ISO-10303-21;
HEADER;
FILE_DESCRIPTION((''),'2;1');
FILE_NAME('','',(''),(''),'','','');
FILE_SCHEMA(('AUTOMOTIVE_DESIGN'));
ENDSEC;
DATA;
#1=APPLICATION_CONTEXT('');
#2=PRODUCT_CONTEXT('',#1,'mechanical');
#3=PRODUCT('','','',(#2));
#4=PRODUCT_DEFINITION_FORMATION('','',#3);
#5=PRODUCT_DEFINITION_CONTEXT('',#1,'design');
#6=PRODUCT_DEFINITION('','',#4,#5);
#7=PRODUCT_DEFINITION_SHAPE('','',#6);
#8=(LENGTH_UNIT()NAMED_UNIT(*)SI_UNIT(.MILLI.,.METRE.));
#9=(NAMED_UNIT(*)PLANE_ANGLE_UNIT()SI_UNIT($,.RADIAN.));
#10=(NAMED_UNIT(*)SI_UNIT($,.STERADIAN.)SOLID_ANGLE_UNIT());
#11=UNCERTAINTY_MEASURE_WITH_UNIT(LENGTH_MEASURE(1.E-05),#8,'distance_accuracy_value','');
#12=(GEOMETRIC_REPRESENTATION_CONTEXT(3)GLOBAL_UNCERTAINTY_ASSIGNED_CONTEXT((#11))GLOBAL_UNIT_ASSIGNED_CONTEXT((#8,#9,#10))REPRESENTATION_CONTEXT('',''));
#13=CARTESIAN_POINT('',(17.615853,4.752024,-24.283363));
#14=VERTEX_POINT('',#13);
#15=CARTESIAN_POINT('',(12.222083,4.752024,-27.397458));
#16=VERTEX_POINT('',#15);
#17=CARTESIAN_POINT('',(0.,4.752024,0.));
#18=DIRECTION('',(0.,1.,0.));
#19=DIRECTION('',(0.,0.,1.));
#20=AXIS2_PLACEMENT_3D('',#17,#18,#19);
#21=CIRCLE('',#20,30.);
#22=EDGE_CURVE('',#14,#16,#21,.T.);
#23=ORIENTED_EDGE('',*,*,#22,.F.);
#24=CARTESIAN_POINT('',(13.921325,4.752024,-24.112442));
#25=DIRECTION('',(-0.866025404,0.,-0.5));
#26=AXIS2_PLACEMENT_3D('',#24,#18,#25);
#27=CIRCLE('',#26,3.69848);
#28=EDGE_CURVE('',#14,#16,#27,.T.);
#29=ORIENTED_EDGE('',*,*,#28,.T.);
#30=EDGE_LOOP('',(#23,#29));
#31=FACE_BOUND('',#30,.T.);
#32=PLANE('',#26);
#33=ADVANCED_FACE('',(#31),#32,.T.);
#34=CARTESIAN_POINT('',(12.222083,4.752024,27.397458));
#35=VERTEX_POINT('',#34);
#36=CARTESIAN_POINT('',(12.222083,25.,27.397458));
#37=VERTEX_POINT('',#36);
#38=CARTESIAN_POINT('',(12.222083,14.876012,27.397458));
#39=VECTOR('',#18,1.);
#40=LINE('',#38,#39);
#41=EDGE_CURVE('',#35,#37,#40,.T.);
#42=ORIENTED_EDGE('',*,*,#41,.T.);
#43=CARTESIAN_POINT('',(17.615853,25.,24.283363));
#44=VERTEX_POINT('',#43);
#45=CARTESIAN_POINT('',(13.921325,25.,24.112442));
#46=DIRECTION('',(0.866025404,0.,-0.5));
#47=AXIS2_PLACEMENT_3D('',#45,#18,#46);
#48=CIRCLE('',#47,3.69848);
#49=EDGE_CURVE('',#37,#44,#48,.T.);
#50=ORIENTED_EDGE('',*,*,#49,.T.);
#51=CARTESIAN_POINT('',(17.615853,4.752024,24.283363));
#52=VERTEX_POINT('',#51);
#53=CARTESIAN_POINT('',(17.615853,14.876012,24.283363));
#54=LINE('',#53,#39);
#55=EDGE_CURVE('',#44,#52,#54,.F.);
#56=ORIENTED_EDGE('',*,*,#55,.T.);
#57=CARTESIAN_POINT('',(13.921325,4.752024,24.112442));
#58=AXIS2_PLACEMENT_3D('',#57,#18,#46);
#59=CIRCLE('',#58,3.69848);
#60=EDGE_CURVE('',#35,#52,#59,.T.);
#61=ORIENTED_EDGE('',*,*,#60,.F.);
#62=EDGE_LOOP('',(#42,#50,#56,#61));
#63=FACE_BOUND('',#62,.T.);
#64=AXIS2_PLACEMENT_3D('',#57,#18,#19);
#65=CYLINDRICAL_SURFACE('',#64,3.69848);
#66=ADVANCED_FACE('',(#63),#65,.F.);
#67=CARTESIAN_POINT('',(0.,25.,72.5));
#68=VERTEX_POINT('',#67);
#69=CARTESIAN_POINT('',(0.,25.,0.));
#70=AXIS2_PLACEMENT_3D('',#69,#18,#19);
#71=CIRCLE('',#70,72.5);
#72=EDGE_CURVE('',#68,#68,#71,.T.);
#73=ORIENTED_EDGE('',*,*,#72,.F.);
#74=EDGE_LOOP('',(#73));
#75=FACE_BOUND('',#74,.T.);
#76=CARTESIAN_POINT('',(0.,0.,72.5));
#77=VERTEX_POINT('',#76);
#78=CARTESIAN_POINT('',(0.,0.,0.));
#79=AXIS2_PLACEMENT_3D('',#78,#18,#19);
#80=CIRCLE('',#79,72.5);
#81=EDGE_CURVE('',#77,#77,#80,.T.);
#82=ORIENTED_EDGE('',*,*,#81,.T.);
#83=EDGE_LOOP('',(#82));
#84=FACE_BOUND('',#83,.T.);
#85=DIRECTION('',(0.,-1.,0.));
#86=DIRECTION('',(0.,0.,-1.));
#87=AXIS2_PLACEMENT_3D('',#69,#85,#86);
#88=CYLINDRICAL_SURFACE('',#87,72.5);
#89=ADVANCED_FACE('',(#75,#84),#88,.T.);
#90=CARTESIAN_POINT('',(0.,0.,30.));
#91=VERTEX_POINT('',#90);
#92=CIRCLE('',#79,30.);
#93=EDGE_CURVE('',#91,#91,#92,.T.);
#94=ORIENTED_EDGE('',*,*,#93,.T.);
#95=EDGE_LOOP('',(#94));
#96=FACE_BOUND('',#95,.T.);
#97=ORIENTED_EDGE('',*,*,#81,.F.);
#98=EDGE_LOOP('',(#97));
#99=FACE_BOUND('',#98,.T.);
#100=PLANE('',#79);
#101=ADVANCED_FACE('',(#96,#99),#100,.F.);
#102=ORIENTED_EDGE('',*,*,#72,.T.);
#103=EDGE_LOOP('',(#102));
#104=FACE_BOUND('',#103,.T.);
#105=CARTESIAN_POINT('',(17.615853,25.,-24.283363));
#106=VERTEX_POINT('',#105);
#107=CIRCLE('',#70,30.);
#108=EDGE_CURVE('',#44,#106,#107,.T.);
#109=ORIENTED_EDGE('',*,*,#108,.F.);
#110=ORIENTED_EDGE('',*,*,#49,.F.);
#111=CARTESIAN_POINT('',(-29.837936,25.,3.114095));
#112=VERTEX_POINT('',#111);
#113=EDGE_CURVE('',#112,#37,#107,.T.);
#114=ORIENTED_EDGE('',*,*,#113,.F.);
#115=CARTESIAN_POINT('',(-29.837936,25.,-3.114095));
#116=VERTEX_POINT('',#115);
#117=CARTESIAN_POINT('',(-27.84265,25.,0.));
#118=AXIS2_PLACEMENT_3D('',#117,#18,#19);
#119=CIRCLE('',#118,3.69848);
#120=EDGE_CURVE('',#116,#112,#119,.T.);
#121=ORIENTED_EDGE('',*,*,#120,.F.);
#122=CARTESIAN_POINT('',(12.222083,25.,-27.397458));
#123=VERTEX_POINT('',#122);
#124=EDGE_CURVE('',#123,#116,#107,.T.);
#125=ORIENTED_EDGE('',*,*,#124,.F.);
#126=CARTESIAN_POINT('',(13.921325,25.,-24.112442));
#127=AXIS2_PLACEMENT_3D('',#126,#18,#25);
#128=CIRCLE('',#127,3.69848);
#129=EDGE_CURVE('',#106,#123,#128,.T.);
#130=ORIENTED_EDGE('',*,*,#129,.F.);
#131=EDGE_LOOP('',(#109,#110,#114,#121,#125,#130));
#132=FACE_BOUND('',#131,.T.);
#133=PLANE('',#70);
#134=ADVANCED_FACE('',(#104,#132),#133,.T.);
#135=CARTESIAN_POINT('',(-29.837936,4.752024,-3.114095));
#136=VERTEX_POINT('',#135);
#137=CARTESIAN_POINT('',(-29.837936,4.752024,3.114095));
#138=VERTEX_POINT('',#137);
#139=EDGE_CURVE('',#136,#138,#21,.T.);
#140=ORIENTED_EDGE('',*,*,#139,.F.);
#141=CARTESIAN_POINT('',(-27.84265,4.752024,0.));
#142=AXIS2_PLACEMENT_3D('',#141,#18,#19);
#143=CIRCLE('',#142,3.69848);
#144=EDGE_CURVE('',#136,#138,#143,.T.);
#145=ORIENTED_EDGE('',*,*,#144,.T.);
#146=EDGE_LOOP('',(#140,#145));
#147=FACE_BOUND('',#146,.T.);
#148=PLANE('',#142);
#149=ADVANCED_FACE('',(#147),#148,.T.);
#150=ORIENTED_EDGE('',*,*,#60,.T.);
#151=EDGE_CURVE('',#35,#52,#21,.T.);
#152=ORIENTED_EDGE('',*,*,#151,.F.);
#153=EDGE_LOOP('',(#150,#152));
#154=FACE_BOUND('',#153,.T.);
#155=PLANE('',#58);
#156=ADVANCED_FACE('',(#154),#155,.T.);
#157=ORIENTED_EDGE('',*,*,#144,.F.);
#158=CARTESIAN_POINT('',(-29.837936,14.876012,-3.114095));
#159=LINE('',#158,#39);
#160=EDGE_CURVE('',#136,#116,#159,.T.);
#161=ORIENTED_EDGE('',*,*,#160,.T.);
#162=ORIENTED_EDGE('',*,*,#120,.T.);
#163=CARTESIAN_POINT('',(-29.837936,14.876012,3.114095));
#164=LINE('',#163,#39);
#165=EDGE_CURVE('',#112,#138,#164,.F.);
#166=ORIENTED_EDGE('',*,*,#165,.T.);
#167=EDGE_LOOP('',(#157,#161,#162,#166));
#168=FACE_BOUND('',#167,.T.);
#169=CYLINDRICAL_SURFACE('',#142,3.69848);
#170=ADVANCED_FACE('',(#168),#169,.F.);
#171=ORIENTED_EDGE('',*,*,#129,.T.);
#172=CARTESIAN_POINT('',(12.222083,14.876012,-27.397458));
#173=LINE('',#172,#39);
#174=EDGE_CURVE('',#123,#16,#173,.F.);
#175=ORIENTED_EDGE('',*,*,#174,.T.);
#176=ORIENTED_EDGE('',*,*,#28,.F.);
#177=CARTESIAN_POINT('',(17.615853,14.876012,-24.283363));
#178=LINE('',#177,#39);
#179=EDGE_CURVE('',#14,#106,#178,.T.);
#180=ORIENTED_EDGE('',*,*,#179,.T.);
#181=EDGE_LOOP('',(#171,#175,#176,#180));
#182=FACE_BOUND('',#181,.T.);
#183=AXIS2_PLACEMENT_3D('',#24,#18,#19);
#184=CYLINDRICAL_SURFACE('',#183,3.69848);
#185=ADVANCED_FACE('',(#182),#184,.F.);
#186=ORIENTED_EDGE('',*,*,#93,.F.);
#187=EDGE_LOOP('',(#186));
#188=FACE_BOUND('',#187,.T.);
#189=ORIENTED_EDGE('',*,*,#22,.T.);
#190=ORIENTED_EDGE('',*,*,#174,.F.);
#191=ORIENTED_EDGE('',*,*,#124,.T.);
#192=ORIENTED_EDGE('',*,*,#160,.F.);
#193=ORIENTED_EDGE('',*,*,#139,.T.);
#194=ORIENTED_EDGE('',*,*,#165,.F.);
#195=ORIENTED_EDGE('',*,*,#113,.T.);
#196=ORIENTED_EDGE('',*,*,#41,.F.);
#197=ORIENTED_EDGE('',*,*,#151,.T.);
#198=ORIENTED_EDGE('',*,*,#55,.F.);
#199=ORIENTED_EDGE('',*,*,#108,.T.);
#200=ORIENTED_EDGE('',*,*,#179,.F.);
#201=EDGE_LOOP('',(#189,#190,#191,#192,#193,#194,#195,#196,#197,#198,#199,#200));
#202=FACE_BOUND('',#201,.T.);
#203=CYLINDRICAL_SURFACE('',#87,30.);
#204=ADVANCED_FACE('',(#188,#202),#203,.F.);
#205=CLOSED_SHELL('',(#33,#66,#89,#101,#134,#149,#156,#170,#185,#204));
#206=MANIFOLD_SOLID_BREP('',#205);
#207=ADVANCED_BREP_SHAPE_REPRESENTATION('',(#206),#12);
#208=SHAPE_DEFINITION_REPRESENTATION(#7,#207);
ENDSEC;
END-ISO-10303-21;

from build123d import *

# Parameters (mm, degrees)
SKETCH1_R           = 72.5
BOSS_EXTRUDE1_DEPTH = 25
SKETCH2_R           = 30
CUT_EXTRUDE1_DEPTH  = 106.534354596
SKETCH3_R           = 3.698479856
CUT_EXTRUDE2_DEPTH  = 20.247976071
CIRPATTERN1_COUNT   = 3


with BuildPart() as part:
    # Sketch1 → Boss-Extrude1 (new body)
    with BuildSketch(Plane(origin=(0, 0, 0), x_dir=(1, 0, 0), z_dir=(0, 1, 0))):
        Circle(SKETCH1_R)
    extrude(amount=BOSS_EXTRUDE1_DEPTH)

    # Sketch2 → Cut-Extrude1 (cut, through all)
    with BuildSketch(Plane(origin=(0, 0, 0), x_dir=(1, 0, 0), z_dir=(0, 1, 0))):
        Circle(SKETCH2_R)
    extrude(amount=CUT_EXTRUDE1_DEPTH, mode=Mode.SUBTRACT)

    # Sketch3 → Cut-Extrude2 (cut)
    with BuildSketch(Plane(origin=(0, 25, 0), x_dir=(1, 0, 0), z_dir=(0, 1, 0))):
        with Locations((-27.842649971, 0)):
            Circle(SKETCH3_R)
    cut_extrude2 = extrude(amount=-CUT_EXTRUDE2_DEPTH, mode=Mode.SUBTRACT)

    # CirPattern1: Cut-Extrude2 ×3 about axis
    cirpattern1_axis = Axis((0, 0, 0), (0, 1, 0))
    for i in range(1, CIRPATTERN1_COUNT):
        add(cut_extrude2.rotate(cirpattern1_axis, i * 360 / CIRPATTERN1_COUNT), mode=Mode.SUBTRACT)


solid = part.part
